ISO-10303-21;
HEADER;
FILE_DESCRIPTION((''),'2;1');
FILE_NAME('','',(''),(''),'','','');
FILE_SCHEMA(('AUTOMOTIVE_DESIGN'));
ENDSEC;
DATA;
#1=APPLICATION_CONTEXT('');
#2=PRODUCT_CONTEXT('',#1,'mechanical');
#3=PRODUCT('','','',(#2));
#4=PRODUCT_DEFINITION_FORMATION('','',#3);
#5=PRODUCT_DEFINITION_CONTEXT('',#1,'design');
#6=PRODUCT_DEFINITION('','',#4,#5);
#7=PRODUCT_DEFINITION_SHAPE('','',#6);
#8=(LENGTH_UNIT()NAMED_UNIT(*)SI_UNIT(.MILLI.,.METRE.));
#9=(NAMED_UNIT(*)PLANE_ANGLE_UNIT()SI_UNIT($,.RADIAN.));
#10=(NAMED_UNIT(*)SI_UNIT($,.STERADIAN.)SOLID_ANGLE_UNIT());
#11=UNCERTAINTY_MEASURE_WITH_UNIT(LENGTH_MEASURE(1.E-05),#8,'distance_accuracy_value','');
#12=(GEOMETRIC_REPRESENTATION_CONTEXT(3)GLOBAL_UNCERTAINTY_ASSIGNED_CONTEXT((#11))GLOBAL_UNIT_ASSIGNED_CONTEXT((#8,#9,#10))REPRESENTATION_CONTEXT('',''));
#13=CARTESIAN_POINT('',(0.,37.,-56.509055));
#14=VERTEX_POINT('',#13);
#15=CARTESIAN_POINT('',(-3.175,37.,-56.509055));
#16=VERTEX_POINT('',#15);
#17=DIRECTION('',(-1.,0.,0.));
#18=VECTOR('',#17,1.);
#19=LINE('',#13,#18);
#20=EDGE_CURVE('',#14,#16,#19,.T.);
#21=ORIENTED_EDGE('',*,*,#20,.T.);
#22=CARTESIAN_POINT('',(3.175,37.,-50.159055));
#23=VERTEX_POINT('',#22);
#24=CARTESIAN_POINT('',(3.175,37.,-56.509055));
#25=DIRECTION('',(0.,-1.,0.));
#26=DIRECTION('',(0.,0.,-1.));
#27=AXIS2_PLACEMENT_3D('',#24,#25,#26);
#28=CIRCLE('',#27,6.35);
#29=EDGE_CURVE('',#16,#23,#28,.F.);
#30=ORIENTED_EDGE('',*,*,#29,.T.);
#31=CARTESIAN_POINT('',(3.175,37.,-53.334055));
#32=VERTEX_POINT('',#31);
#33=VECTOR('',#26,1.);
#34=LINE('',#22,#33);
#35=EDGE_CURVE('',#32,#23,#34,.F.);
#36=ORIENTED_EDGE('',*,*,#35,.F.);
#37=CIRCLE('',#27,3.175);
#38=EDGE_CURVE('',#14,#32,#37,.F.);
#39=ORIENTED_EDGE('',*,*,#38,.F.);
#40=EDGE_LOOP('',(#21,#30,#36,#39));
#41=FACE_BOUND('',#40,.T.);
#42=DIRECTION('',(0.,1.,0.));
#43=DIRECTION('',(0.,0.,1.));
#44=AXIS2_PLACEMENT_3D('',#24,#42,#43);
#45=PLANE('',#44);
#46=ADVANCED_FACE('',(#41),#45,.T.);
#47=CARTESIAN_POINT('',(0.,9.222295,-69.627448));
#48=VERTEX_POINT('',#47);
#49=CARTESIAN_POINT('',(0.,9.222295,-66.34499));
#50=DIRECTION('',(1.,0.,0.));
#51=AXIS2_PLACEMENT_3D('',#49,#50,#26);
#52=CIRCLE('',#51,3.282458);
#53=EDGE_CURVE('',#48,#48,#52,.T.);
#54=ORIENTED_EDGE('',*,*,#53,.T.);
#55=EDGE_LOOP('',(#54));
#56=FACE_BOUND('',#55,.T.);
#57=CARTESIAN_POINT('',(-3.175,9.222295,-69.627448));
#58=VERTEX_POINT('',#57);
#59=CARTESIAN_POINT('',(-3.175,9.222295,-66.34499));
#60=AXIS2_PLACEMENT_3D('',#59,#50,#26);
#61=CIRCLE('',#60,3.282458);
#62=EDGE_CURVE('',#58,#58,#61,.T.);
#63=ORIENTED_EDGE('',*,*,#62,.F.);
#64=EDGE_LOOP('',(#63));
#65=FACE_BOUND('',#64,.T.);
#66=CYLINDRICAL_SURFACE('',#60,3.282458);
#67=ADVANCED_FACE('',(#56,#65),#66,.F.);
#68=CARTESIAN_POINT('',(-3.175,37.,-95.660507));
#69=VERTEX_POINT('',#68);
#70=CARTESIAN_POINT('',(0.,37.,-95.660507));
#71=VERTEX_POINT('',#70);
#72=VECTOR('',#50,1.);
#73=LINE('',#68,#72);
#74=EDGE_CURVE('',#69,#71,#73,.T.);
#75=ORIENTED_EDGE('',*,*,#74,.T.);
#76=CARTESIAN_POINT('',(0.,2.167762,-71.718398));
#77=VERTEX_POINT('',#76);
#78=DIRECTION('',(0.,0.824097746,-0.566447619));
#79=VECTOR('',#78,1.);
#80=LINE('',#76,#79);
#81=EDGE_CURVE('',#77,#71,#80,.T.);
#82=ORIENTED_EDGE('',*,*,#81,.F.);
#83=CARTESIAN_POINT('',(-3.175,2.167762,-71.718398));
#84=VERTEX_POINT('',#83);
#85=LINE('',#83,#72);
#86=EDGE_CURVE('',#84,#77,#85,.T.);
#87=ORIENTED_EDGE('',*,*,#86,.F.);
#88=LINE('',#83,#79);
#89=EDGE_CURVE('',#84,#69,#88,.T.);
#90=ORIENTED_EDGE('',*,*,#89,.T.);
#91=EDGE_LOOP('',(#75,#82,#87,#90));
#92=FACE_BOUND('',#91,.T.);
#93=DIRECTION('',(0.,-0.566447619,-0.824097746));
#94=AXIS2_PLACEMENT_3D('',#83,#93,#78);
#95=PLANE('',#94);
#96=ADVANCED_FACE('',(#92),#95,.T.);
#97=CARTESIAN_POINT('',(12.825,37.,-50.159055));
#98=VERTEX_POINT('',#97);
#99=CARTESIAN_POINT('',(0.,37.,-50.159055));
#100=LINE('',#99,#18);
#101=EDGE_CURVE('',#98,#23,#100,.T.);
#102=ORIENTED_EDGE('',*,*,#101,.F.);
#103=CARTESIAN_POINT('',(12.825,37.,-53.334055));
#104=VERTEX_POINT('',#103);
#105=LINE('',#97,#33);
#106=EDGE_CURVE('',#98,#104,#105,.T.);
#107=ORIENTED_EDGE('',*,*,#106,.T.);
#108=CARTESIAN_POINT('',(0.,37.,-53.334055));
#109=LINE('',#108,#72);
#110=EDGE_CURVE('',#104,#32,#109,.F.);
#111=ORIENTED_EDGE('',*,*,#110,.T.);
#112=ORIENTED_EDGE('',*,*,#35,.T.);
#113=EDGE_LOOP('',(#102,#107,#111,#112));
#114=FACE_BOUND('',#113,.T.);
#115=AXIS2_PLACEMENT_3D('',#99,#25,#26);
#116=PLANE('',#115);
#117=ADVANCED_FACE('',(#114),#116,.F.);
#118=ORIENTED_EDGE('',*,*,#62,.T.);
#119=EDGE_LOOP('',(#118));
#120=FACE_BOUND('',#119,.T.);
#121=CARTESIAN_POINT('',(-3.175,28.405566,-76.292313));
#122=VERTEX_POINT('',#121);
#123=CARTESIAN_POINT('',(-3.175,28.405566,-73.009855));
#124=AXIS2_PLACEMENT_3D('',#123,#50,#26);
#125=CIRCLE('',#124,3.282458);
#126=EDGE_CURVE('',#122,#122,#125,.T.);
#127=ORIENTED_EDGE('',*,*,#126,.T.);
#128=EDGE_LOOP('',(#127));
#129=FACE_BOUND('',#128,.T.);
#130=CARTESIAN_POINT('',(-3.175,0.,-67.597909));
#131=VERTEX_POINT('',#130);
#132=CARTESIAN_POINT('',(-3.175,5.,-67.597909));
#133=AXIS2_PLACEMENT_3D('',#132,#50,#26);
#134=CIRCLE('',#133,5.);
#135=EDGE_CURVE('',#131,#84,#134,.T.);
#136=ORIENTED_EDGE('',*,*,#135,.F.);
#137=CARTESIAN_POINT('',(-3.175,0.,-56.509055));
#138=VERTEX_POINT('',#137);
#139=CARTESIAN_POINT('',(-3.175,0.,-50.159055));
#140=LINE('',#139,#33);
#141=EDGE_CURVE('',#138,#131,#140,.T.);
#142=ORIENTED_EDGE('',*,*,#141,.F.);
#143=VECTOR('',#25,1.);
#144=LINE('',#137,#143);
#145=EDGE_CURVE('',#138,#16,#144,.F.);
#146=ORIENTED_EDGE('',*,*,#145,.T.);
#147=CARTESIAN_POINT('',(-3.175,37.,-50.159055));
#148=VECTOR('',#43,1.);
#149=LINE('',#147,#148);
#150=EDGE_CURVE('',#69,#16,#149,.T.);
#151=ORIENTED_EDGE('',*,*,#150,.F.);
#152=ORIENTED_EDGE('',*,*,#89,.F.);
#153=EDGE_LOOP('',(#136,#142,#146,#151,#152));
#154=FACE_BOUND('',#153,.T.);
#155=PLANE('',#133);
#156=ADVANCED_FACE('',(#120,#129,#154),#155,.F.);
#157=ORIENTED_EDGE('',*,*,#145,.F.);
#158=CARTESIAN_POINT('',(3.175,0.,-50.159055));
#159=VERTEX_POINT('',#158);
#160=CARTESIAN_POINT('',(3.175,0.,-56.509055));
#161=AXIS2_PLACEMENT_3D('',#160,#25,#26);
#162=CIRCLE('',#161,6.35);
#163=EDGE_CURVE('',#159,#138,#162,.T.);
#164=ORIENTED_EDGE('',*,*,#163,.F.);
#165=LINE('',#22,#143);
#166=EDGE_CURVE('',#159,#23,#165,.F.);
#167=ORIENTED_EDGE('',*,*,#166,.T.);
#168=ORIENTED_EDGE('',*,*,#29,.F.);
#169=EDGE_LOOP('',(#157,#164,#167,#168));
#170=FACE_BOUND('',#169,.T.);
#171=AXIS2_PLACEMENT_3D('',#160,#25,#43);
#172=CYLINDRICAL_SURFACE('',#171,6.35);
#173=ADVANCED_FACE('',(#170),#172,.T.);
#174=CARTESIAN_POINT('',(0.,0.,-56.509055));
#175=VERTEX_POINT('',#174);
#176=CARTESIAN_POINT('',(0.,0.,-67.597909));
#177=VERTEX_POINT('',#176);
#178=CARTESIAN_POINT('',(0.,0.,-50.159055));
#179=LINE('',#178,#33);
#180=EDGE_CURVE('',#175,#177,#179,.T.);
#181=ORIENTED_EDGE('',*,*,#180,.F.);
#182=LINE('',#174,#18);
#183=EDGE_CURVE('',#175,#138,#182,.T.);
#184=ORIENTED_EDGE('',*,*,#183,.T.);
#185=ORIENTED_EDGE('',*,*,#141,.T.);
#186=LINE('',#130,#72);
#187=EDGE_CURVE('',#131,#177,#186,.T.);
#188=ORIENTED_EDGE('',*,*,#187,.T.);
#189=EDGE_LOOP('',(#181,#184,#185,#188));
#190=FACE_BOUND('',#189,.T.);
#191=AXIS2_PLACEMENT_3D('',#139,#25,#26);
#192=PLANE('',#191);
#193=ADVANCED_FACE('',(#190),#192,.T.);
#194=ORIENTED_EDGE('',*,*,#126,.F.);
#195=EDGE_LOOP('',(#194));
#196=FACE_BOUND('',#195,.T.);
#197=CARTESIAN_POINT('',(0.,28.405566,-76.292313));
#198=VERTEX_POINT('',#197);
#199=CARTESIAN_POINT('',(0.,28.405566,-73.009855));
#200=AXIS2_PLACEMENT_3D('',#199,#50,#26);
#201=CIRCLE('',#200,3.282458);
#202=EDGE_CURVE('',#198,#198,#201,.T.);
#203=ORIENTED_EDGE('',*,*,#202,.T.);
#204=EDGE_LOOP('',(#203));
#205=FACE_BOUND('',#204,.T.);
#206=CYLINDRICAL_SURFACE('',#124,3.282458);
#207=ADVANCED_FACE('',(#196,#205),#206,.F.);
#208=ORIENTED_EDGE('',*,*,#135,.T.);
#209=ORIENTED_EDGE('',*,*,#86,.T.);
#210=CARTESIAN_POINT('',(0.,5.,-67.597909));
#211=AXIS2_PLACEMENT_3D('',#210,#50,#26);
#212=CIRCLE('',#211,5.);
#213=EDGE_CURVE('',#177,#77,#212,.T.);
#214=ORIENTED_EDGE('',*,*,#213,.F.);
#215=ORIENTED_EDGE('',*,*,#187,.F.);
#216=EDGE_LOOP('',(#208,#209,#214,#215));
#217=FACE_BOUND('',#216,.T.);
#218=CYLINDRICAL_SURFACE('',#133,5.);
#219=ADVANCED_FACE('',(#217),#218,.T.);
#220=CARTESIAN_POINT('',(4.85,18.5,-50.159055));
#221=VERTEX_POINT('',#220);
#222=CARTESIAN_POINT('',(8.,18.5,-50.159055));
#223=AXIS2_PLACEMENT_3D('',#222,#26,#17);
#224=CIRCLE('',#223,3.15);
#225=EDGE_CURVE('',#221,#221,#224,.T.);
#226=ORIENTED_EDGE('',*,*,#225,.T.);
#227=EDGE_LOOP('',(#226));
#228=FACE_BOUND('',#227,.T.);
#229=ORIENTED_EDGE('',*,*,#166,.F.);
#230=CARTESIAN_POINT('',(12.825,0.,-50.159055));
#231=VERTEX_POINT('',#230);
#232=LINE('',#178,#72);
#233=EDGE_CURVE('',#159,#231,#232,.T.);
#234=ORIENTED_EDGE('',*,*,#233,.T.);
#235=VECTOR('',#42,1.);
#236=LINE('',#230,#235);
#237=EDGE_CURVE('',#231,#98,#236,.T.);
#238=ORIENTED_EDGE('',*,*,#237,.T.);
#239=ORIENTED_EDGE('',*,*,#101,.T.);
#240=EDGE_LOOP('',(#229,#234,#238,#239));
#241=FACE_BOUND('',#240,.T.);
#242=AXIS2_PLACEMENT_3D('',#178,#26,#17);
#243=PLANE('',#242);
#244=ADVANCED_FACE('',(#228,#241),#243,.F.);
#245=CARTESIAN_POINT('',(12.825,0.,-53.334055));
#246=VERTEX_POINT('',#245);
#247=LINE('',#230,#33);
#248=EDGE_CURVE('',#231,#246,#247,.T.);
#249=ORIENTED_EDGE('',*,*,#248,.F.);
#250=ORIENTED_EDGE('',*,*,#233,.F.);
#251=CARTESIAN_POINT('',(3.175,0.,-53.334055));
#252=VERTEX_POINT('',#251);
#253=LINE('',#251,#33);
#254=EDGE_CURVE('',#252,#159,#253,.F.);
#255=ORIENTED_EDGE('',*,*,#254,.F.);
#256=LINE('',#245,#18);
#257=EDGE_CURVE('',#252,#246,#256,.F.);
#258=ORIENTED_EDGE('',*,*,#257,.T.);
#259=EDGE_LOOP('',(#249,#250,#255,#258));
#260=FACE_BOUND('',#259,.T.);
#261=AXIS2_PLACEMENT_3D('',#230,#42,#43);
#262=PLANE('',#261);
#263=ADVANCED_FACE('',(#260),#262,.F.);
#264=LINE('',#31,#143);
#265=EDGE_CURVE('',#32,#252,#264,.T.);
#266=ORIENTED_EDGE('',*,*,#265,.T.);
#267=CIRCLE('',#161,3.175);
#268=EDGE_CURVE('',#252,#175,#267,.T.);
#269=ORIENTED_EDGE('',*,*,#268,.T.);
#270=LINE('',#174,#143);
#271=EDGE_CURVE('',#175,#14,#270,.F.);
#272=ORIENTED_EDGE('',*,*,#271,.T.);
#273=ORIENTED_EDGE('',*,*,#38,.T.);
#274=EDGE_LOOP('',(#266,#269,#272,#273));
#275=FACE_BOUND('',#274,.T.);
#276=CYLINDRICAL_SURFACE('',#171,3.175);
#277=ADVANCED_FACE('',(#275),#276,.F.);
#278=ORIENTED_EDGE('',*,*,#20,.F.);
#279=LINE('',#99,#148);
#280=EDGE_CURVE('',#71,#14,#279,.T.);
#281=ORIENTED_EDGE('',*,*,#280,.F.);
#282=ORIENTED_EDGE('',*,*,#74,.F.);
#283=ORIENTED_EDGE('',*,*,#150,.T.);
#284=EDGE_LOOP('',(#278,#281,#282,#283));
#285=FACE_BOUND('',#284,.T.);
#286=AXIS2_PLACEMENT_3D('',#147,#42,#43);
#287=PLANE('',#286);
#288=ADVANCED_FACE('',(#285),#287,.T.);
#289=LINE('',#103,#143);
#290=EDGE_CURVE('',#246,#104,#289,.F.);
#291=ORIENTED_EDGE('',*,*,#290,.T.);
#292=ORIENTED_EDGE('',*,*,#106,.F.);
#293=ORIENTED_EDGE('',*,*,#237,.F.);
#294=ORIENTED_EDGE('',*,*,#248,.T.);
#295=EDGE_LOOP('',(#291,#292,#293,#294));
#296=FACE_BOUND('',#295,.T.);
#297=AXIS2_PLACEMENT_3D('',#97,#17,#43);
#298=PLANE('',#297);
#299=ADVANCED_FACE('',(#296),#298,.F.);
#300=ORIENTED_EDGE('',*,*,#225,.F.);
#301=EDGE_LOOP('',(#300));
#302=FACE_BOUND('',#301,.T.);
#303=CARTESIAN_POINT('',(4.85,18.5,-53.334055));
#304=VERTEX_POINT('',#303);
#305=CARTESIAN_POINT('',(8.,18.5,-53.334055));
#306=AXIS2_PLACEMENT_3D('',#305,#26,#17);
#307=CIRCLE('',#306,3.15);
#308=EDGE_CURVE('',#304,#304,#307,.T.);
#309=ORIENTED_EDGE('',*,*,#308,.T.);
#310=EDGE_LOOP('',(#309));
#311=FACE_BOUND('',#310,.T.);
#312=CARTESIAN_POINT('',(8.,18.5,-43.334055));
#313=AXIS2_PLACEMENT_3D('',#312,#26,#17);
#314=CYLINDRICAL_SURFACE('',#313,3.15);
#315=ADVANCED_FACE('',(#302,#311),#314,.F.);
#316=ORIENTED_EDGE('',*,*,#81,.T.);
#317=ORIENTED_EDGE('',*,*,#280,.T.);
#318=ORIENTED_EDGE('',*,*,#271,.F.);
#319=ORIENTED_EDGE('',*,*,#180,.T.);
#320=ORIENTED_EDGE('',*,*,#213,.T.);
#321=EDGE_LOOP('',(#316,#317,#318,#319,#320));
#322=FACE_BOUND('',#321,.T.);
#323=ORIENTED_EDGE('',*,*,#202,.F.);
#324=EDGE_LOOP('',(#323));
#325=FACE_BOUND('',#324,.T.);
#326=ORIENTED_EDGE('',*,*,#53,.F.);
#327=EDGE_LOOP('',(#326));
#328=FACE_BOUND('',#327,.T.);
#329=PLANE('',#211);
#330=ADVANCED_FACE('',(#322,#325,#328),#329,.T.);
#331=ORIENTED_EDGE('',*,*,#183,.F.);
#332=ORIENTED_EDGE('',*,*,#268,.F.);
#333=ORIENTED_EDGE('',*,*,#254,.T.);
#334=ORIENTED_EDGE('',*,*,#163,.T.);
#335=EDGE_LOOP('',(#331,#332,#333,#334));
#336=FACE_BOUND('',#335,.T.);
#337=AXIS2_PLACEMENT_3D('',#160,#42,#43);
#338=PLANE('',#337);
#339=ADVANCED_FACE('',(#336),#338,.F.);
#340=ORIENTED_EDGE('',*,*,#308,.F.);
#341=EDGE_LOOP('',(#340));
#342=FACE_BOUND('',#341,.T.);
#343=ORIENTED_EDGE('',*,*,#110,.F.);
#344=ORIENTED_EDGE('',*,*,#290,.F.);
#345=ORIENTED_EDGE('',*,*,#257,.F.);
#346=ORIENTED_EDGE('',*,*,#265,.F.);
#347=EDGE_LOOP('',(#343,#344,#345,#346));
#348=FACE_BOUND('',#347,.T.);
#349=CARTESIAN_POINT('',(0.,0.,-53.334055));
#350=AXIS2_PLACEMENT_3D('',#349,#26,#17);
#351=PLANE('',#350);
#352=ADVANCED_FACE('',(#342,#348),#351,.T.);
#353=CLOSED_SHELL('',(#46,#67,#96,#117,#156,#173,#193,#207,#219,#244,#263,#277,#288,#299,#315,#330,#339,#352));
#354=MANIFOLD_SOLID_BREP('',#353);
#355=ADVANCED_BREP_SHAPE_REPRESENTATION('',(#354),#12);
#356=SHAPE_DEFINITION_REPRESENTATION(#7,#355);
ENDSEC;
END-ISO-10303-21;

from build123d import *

# Parameters (mm, degrees)
SKETCH2_R                    = 3.282457618
BASE_FLANGE1_DEPTH           = 3.175
EDGE_FLANGE1_STRIP_W         = 19.05
EDGE_FLANGE1_STRIP_H         = 3.175
EDGE_FLANGE1_STRIP_CUT_DEPTH = 37
EDGE_FLANGE1_DEPTH           = 37
SKETCH6_R                    = 3.15
CUT_EXTRUDE1_DEPTH           = 10


# Sheet-metal steps are written as plain solids
with BuildPart() as part:
    # Sketch2 → Base-Flange1 (new body)
    with BuildSketch(Plane(origin=(0, 0, 0), x_dir=(0, 0, -1), z_dir=(1, 0, 0))):
        with BuildLine():
            Line((50.159054546, 37), (50.159054546, 0))
            Line((50.159054546, 0), (67.597909272, 0))
            ThreePointArc((67.597909272, 0), (69.925870777, 0.575003364), (71.718398003, 2.167761907))
            Line((71.718398003, 2.167761907), (95.660507303, 37))
            Line((95.660507303, 37), (50.159054546, 37))
        make_face()
        with Locations((73.009854993, 28.405566411)):
            Circle(SKETCH2_R, mode=Mode.SUBTRACT)
        with Locations((66.344990455, 9.222294526)):
            Circle(SKETCH2_R, mode=Mode.SUBTRACT)
    extrude(amount=-BASE_FLANGE1_DEPTH)

    # Edge-Flange1 strip (across the edge) → Edge-Flange1 strip cut (cut)
    with BuildSketch(Plane(origin=(0, 37, -50.159054546), x_dir=(0, 0, -1), z_dir=(0, -1, 0))):
        with Locations((-3.175, -1.5875)):
            Rectangle(EDGE_FLANGE1_STRIP_W, EDGE_FLANGE1_STRIP_H)
    extrude(amount=EDGE_FLANGE1_STRIP_CUT_DEPTH, mode=Mode.SUBTRACT)

    # Edge-Flange1 section (across the edge) → Edge-Flange1 (add)
    with BuildSketch(Plane(origin=(0, 37, -50.159054546), x_dir=(0, 0, -1), z_dir=(0, -1, 0))):
        with BuildLine():
            Line((0, 3.175), (0, 12.825))
            Line((0, 12.825), (3.175, 12.825))
            Line((3.175, 12.825), (3.175, 3.175))
            ThreePointArc((3.175, 3.175), (4.10493597, 0.92993597), (6.35, 0))
            Line((6.35, 0), (6.35, -3.175))
            ThreePointArc((6.35, -3.175), (1.859871939, -1.315128061), (0, 3.175))
        make_face()
    extrude(amount=EDGE_FLANGE1_DEPTH)

    # Sketch6 → Cut-Extrude1 (cut)
    with BuildSketch(Plane(origin=(0, 0, -53.334054546), x_dir=(-1, 0, 0), z_dir=(0, 0, -1))):
        with Locations((-8, 18.5)):
            Circle(SKETCH6_R)
    extrude(amount=-CUT_EXTRUDE1_DEPTH, mode=Mode.SUBTRACT)


solid = part.part
